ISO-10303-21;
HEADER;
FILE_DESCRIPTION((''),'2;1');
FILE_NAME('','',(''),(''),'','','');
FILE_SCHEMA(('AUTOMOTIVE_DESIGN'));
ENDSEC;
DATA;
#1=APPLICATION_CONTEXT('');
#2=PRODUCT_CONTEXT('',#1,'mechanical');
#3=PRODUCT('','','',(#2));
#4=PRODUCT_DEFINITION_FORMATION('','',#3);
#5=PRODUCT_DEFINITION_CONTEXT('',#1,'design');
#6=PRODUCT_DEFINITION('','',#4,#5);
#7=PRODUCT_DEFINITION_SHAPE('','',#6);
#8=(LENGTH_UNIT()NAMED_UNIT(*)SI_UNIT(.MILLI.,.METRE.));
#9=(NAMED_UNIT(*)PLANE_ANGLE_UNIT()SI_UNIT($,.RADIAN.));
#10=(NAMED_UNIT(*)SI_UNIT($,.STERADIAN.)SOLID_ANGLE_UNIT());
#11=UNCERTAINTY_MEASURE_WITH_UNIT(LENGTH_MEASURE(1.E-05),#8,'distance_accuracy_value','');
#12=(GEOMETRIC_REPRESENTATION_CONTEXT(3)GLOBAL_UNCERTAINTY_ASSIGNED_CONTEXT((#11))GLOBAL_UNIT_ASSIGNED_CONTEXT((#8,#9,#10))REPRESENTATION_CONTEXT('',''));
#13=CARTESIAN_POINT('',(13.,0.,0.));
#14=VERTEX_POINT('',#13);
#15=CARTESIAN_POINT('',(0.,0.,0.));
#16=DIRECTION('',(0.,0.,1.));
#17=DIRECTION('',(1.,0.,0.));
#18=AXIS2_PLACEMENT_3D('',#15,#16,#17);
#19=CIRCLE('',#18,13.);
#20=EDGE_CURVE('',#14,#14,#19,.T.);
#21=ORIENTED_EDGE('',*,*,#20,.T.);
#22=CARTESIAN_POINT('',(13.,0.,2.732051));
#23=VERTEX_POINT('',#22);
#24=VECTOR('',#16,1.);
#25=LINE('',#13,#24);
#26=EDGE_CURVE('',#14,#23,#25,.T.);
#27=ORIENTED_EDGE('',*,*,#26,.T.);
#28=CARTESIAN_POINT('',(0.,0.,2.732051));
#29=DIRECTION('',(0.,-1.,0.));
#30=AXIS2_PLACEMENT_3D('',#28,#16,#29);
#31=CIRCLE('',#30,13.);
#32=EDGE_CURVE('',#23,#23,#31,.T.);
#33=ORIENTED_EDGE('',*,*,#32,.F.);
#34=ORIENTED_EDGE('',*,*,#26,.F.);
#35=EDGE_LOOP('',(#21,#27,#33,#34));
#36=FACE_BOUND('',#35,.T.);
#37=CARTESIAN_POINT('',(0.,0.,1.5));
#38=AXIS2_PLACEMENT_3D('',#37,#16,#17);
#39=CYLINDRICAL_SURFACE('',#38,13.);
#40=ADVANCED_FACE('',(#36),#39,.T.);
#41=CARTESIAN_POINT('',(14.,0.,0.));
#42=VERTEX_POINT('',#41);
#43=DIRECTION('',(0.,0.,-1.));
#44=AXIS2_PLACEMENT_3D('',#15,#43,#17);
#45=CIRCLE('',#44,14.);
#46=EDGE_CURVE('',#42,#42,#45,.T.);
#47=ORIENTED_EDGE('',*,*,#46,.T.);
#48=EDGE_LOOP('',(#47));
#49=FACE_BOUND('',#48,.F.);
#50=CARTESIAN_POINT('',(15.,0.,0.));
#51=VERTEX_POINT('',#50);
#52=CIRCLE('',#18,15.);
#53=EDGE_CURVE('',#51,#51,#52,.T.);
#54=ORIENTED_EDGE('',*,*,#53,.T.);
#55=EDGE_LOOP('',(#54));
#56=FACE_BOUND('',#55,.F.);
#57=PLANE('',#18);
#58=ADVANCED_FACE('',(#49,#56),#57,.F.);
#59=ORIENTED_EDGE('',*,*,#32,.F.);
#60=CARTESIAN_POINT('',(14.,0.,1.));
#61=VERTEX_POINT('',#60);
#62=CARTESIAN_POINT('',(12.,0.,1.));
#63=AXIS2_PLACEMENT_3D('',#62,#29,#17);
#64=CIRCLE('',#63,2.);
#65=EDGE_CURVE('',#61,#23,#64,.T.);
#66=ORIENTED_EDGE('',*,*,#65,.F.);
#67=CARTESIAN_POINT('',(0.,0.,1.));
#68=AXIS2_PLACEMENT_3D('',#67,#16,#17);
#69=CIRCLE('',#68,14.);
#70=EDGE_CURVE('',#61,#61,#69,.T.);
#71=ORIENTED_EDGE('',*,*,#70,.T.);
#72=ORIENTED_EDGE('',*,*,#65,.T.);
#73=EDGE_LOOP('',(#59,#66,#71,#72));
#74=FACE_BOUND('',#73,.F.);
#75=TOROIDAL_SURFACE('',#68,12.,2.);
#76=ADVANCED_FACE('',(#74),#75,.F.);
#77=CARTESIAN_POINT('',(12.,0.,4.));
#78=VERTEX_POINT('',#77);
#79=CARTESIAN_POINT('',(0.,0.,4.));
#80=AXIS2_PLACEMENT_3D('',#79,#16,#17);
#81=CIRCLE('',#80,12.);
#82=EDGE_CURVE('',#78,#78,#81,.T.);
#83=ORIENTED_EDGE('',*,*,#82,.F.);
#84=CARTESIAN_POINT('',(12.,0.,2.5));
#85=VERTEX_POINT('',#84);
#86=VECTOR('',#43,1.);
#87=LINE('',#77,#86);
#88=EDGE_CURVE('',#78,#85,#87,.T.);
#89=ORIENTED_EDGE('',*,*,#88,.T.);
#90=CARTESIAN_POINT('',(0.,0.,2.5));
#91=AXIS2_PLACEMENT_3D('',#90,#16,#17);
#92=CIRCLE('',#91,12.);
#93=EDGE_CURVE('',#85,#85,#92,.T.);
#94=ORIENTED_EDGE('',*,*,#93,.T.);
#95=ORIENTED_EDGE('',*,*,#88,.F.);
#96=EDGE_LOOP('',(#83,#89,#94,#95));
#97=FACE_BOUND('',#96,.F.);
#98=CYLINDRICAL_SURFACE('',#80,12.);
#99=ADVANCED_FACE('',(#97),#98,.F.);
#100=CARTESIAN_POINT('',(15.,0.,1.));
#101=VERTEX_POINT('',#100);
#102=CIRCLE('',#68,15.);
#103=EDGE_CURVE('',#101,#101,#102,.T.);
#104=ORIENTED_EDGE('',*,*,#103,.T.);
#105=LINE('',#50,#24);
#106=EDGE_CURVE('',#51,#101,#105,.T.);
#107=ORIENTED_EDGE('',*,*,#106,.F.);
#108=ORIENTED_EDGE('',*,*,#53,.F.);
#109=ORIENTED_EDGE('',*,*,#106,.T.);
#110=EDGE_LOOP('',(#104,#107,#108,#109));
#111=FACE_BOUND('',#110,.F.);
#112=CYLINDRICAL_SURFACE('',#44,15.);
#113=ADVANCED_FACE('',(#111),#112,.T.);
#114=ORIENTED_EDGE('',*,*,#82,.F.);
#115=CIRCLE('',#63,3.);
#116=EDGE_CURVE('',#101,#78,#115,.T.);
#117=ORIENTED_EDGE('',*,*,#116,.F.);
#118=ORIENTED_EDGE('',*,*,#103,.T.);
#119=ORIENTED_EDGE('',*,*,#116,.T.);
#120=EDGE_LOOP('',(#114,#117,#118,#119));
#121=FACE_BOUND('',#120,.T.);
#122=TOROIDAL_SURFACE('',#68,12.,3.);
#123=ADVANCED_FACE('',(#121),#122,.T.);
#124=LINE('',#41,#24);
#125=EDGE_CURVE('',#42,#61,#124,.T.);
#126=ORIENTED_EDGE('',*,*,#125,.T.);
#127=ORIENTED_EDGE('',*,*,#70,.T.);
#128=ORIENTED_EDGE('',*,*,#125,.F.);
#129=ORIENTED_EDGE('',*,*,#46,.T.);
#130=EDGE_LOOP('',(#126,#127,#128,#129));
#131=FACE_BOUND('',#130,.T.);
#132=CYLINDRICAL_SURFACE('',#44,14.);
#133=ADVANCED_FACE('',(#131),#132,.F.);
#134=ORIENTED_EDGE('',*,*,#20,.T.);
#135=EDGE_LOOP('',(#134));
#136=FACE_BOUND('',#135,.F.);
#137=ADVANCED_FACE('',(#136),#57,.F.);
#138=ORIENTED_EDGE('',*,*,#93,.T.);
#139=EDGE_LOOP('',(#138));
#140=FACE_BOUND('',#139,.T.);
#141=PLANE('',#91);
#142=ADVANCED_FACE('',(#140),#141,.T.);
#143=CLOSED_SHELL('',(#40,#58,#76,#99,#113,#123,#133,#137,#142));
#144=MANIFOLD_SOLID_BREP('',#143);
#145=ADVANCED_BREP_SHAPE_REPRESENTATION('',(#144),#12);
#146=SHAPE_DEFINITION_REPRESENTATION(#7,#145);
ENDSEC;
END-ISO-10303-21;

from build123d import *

# Parameters (mm, degrees)
F0_R     = 15
F1_DEPTH = 4
F2_R     = 3
F3_DEPTH = 1.5
F4_T     = -1
F5_DEPTH = 1.5


with BuildPart() as f1:
    # F0 (on Top) → F1 (new body)
    with BuildSketch(Plane.XY):
        Circle(F0_R)
    extrude(amount=F1_DEPTH)

    # F2
    f2_edges = [f1.edges().sort_by_distance(p)[0] for p in [
        (-15, 0, 4),
    ]]
    fillet(f2_edges, radius=F2_R)

    # F3 (cut): a face of the model
    f3_faces = [f1.faces().sort_by_distance(p)[0] for p in [
        (0, 0, 4),
    ]]
    extrude(f3_faces, amount=-F3_DEPTH, mode=Mode.SUBTRACT)

    # F4
    f4_openings = [f1.faces().sort_by_distance(p)[0] for p in [
        (0, 0, 0),
    ]]
    offset(amount=F4_T, openings=f4_openings, kind=Kind.INTERSECTION)

    # F5 (add): a face of the model
    f5_faces = [f1.faces().sort_by_distance(p)[0] for p in [
        (0, 0, 1.5),
    ]]
    extrude(f5_faces, amount=F5_DEPTH)


solid = f1.part
